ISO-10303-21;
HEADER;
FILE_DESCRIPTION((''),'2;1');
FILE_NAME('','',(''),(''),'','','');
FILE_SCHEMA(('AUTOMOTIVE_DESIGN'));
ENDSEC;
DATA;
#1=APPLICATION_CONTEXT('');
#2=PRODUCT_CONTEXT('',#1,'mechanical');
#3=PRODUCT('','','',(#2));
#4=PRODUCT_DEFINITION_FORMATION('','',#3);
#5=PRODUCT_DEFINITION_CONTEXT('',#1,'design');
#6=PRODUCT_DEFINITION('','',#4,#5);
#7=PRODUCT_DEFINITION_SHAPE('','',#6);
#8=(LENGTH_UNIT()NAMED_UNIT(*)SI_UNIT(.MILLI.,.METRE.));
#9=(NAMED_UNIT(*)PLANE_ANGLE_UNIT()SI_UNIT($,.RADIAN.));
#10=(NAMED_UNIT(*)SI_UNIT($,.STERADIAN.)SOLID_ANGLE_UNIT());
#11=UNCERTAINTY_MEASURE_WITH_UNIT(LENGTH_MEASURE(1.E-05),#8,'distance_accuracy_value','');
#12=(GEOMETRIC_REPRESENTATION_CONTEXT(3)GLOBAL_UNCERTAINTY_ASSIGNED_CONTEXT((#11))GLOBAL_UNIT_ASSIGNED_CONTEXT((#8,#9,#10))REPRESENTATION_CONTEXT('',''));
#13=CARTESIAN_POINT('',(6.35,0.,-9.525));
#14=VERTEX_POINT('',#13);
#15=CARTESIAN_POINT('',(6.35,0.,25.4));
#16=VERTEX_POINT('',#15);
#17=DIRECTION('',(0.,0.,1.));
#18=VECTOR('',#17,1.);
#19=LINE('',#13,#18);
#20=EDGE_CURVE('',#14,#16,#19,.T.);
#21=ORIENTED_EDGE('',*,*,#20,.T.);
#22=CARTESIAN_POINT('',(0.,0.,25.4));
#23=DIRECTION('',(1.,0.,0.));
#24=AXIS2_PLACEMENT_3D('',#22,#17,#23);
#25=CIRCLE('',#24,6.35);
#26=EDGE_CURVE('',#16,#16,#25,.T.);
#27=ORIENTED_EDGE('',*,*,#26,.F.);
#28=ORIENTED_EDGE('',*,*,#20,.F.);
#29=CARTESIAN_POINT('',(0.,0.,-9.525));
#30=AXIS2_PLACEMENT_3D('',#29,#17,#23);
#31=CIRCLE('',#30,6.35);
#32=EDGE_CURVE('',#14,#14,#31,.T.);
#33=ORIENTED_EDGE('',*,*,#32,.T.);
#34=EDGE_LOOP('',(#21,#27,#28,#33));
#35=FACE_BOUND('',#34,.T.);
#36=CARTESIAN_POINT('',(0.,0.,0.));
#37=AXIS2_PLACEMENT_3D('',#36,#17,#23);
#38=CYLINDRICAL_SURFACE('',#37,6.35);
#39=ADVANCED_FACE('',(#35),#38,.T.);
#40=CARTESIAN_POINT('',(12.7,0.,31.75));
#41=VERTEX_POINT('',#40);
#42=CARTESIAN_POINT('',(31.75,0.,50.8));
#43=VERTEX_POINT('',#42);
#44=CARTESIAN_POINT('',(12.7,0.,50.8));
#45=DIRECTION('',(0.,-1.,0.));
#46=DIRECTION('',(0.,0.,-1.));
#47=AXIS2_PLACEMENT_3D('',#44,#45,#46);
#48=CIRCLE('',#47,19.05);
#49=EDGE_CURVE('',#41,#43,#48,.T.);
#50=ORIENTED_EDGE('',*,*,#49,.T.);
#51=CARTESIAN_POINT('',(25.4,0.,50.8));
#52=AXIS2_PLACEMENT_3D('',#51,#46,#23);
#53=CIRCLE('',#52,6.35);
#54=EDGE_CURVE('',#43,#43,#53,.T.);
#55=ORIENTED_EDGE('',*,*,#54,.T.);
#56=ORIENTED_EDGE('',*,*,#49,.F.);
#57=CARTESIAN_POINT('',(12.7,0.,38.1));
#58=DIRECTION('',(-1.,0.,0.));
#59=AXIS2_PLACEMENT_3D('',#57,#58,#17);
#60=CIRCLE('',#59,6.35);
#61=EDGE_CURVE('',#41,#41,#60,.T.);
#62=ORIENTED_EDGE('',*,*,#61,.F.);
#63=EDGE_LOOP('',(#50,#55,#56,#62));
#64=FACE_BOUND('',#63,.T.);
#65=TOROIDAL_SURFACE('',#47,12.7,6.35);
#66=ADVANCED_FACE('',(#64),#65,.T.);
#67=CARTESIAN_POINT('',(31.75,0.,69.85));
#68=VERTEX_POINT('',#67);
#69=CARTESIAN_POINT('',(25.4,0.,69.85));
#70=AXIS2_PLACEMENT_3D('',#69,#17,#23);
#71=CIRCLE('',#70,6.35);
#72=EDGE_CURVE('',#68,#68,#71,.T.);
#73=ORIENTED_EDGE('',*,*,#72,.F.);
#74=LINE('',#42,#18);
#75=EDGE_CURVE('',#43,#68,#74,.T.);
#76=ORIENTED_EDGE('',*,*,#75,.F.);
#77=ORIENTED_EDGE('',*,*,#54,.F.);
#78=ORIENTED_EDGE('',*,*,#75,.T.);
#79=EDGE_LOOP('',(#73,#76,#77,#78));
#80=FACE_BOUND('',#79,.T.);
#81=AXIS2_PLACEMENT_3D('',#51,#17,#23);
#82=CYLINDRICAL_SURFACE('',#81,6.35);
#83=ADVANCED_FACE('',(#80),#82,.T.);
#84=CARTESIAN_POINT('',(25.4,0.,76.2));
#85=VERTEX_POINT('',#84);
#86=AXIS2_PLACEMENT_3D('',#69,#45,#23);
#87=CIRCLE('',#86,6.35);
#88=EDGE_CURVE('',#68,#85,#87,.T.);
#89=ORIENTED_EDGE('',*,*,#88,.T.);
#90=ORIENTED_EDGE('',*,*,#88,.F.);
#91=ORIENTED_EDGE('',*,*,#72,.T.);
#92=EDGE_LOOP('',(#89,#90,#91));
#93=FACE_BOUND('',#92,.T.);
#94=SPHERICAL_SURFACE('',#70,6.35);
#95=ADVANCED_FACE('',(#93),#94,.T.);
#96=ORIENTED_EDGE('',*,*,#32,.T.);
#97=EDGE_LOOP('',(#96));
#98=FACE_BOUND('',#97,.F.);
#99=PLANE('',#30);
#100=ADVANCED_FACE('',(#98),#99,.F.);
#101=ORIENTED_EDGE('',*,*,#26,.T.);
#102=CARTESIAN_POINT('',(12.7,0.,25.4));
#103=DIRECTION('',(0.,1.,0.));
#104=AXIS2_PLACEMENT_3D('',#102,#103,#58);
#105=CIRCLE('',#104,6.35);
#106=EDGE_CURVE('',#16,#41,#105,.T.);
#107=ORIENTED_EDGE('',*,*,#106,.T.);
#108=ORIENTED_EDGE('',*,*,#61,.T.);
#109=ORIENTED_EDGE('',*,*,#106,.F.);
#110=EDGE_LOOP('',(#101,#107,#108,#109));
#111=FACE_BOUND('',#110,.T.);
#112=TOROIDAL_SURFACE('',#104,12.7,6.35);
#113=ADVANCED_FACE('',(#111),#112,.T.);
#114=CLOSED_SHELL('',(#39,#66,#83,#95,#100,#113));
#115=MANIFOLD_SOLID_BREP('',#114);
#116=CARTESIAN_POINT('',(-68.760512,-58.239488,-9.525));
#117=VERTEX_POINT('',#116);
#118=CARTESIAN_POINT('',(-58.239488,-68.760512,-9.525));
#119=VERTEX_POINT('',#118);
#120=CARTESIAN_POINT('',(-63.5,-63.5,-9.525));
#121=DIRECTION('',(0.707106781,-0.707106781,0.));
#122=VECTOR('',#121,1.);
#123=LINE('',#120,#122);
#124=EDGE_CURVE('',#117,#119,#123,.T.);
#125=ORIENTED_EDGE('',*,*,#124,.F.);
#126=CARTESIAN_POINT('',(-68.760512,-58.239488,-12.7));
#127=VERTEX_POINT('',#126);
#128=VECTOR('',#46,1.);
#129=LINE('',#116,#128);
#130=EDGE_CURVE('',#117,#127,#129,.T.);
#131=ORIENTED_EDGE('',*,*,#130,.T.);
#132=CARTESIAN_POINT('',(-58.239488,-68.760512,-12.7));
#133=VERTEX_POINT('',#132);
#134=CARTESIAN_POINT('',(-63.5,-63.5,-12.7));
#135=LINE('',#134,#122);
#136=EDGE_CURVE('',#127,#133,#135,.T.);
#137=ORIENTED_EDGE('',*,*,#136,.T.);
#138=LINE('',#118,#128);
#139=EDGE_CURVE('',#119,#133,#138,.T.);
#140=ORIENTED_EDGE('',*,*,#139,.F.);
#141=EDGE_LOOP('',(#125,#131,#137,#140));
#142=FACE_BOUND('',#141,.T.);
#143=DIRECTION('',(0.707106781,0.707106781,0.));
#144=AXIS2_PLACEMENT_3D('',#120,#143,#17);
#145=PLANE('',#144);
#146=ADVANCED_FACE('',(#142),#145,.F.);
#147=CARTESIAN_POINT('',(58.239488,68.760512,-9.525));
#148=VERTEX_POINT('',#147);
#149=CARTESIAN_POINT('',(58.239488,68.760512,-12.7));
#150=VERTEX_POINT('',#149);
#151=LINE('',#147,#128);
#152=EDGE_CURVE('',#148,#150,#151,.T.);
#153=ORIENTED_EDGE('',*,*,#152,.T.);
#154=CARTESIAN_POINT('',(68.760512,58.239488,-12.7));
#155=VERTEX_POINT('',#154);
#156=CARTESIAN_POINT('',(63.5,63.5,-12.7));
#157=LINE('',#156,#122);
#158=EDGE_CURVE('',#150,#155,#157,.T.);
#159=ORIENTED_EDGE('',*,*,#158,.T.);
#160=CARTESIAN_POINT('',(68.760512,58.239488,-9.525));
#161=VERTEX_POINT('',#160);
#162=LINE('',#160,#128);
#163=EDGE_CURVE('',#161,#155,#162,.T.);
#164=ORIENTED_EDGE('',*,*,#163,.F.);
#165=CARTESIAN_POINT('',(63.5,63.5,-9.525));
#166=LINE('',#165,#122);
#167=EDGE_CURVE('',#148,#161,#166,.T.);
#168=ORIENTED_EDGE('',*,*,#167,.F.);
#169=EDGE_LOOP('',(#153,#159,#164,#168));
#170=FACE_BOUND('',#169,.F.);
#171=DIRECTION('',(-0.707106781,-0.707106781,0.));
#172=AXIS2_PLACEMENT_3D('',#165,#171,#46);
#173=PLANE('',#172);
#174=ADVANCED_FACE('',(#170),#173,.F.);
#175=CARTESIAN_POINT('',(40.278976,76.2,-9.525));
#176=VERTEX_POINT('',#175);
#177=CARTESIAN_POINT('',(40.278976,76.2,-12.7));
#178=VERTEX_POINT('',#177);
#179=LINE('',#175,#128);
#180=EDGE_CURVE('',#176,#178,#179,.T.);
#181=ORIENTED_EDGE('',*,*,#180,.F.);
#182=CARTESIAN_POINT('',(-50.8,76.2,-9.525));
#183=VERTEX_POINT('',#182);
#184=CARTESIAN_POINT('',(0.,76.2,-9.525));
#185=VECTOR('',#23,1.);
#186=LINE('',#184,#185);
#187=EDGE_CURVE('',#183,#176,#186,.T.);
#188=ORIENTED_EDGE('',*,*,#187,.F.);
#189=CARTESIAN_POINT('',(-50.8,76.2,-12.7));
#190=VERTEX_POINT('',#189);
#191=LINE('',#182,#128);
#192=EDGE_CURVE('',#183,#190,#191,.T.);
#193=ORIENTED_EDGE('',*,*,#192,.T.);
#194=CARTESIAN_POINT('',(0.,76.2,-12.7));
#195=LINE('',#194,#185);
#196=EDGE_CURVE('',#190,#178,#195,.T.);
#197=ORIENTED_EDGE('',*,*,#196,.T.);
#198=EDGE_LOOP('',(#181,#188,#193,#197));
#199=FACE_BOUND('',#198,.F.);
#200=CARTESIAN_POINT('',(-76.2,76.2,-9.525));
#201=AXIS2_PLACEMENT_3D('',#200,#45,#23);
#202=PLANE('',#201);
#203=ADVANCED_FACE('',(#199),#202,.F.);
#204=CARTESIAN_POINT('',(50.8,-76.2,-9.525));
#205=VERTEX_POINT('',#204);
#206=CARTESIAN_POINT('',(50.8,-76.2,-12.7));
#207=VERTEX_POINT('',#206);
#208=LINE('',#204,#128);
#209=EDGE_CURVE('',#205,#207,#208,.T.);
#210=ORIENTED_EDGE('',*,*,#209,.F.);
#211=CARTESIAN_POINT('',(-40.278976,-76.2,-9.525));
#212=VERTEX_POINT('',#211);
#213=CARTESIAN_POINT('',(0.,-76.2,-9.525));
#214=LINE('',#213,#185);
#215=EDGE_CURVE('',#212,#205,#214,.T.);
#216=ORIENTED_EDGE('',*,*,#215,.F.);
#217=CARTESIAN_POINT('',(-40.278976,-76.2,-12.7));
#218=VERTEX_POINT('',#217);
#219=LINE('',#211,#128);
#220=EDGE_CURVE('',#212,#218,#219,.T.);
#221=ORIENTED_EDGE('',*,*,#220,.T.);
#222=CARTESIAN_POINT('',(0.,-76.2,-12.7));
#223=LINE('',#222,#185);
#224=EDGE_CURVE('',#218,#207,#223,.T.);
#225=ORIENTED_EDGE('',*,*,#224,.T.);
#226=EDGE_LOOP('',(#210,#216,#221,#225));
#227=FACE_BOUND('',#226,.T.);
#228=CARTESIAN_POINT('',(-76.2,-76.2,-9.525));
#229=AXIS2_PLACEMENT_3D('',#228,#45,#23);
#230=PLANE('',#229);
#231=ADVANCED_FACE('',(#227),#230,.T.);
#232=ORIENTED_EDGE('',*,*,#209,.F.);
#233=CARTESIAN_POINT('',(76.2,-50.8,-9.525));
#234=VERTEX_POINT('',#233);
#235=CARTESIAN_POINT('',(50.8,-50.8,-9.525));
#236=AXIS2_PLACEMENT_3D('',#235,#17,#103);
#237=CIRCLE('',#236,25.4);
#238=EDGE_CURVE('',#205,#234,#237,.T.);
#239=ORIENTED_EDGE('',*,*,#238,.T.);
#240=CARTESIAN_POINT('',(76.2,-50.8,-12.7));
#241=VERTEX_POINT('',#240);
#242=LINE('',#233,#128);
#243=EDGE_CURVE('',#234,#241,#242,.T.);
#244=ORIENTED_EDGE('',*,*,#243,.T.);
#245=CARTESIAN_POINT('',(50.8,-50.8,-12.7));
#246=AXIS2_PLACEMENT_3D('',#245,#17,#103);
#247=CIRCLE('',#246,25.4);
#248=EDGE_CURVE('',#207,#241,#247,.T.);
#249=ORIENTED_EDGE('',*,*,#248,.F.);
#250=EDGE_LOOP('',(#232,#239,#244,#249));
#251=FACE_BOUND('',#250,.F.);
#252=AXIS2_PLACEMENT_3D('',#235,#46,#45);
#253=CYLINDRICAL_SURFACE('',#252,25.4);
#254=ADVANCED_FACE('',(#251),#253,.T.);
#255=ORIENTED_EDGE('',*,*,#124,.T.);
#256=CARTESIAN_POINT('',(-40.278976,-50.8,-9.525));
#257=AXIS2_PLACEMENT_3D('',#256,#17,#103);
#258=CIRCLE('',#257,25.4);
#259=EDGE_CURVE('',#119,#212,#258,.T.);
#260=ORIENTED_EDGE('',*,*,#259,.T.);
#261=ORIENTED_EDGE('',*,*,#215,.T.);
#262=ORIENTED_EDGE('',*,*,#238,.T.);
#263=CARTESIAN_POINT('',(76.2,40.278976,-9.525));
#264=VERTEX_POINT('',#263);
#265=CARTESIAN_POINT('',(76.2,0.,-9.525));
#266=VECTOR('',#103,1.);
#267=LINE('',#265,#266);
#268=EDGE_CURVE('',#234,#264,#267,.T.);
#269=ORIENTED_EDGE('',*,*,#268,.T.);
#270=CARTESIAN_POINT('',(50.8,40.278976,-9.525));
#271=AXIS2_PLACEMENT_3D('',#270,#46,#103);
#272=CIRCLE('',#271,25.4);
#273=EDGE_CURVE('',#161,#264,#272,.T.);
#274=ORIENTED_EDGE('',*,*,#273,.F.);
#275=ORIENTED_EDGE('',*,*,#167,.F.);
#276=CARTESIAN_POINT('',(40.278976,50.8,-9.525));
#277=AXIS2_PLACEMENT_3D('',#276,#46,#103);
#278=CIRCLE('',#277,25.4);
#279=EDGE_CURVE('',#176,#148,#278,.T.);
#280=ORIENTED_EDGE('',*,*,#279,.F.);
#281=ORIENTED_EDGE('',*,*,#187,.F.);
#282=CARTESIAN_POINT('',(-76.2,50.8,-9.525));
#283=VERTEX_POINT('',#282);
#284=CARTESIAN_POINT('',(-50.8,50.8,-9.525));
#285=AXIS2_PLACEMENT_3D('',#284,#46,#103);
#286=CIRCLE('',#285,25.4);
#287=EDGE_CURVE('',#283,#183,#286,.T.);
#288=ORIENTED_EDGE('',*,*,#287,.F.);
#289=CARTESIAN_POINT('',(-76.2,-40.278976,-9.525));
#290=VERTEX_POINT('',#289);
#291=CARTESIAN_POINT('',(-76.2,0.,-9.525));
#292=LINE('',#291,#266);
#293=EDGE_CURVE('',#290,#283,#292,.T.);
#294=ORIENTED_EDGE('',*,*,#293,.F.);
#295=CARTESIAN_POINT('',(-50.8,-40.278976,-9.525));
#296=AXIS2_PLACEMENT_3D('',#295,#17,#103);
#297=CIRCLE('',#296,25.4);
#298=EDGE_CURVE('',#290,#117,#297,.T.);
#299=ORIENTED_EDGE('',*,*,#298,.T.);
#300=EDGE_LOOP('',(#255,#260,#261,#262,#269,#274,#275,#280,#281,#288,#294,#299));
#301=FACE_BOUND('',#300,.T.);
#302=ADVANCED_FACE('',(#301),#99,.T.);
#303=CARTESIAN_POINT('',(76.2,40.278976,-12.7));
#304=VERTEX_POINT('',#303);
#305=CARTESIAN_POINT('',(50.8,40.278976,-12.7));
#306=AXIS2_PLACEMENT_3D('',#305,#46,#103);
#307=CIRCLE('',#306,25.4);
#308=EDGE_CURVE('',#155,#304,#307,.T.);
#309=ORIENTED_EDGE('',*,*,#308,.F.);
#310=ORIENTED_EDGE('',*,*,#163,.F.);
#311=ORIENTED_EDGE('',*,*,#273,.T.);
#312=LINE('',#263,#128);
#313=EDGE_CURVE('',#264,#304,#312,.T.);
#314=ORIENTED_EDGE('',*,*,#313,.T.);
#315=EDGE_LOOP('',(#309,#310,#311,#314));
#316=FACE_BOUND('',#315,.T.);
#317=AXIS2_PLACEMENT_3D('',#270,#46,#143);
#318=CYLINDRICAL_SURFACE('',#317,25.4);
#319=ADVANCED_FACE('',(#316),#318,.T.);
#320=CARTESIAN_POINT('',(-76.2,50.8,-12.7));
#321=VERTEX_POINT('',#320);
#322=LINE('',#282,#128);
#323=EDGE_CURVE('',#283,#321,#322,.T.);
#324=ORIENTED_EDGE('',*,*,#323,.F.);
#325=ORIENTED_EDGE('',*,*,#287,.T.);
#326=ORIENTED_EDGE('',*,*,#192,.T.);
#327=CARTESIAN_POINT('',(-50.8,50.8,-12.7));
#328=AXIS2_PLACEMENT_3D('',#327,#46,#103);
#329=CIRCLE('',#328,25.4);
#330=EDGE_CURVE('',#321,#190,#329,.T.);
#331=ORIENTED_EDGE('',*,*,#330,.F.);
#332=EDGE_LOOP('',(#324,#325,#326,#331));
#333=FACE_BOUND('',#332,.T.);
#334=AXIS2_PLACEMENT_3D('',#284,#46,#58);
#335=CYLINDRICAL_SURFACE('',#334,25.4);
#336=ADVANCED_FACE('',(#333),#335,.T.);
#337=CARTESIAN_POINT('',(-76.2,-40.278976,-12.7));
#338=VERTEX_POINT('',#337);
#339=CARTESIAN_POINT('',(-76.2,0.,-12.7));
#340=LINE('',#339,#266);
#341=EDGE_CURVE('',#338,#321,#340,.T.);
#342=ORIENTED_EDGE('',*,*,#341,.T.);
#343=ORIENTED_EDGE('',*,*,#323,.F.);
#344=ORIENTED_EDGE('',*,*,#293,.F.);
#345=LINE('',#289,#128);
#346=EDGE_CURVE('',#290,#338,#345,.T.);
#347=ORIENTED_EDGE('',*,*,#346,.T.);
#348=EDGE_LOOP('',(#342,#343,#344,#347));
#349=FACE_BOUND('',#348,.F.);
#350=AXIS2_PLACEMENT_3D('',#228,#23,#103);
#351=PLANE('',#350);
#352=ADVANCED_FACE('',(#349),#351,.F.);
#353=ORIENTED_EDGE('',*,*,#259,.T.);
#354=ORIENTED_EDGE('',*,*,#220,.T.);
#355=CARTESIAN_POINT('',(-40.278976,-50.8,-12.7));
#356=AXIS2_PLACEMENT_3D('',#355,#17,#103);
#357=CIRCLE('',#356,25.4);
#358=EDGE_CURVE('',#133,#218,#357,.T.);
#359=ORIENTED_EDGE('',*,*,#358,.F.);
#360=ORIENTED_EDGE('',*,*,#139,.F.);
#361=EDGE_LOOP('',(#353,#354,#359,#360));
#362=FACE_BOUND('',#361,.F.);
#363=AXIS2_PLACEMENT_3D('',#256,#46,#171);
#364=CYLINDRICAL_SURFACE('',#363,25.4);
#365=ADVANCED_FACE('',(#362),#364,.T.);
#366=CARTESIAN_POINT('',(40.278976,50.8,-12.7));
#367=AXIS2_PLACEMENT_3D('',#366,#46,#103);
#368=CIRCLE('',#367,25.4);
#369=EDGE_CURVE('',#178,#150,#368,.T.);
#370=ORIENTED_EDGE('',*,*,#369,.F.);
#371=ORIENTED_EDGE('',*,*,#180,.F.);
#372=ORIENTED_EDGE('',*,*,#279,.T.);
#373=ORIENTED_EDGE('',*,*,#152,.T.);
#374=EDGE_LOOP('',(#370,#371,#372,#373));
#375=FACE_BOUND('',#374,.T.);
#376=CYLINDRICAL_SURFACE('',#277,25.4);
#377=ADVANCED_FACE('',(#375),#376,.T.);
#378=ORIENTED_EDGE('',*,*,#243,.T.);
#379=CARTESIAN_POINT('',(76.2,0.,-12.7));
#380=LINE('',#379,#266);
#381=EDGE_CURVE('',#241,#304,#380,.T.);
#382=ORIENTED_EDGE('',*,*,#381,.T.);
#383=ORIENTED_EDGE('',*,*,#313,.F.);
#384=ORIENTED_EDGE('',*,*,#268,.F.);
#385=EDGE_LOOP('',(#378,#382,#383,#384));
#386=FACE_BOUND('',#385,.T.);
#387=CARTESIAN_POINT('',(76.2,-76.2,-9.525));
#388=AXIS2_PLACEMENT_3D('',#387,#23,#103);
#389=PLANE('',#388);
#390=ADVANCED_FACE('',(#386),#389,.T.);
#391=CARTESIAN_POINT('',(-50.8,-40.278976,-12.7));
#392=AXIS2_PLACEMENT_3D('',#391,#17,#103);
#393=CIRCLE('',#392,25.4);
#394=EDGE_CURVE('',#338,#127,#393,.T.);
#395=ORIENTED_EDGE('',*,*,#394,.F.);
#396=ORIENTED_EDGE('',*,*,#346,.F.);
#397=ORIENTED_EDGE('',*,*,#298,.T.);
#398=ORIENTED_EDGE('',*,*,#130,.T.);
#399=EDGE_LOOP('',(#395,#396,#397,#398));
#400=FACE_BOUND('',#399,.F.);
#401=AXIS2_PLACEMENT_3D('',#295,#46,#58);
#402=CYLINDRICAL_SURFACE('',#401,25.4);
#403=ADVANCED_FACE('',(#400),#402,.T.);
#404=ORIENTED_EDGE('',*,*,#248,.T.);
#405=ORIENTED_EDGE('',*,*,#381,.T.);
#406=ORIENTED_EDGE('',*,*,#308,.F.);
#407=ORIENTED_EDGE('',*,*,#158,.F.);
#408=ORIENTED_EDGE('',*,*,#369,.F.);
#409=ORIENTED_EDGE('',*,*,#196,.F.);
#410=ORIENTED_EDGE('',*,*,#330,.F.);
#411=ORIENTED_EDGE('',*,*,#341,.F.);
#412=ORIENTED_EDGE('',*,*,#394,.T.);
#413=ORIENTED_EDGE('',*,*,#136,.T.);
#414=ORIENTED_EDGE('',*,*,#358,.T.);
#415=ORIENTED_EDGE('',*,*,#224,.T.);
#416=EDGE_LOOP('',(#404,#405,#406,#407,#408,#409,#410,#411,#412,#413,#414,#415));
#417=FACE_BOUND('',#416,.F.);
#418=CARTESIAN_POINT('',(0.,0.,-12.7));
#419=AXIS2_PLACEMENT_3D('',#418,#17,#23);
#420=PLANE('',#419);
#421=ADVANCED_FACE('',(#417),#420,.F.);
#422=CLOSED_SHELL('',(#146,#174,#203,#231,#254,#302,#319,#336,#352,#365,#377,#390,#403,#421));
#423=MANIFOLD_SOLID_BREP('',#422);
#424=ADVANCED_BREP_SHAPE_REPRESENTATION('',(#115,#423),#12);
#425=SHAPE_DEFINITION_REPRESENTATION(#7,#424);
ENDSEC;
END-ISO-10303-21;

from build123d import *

# Parameters (mm, degrees)
F3_R     = 6.35
F7_W     = 152.4
F7_H     = 152.4
F8_DEPTH = 3.175
F9_DEPTH = 9.525
F10_R    = 25.4
F11_SIZE = 25.4
F12_R    = 25.4
F13_R    = 6.35


# Not quite as in the source:
# - the program builds the solid bodies; features that only make, move or delete a surface that nothing else refers to are left out


with BuildPart() as f5:
    # F5: sweep along a path in F4
    with BuildLine(Plane.XZ) as f5_path:
        Line((0, 0), (0, 25.4))
        ThreePointArc((0, 25.4), (3.7197438789, 34.3802561211), (12.7, 38.1))
        ThreePointArc((12.7, 38.1), (21.6802561211, 41.8197438789), (25.4, 50.8))
        Line((25.4, 50.8), (25.4, 76.2))
    # F3 (on Top) → F5 (sweep)
    with BuildSketch(Plane.XY):
        Circle(F3_R)
    sweep(path=f5_path.line)

    # F9 (add): a face of the model
    f9_faces = [f5.faces().sort_by_distance(p)[0] for p in [
        (0, 0, 0),
    ]]
    extrude(f9_faces, amount=F9_DEPTH)

    # F13
    f13_edges = [f5.edges().sort_by_distance(p)[0] for p in [
        (19.05, 0, 76.2),
    ]]
    fillet(f13_edges, radius=F13_R)


with BuildPart() as f8:
    # F7 (on offset) → F8 (new body)
    with BuildSketch(Plane.XY.offset(-9.525)):
        Rectangle(F7_W, F7_H)
    extrude(amount=-F8_DEPTH)

    # F10
    f10_edges = [f8.edges().sort_by_distance(p)[0] for p in [
        (76.2, -76.2, -11.1125),
        (-76.2, 76.2, -11.1125),
    ]]
    fillet(f10_edges, radius=F10_R)

    # F11
    f11_edges = [f8.edges().sort_by_distance(p)[0] for p in [
        (-76.2, -76.2, -11.1125),
        (76.2, 76.2, -11.1125),
    ]]
    chamfer(f11_edges, length=F11_SIZE)

    # F12
    f12_edges = [f8.edges().sort_by_distance(p)[0] for p in [
        (-76.2, -50.8, -11.1125),
        (-50.8, -76.2, -11.1125),
        (76.2, 50.8, -11.1125),
        (50.8, 76.2, -11.1125),
    ]]
    fillet(f12_edges, radius=F12_R)


solid = Compound([f5.part, f8.part])
